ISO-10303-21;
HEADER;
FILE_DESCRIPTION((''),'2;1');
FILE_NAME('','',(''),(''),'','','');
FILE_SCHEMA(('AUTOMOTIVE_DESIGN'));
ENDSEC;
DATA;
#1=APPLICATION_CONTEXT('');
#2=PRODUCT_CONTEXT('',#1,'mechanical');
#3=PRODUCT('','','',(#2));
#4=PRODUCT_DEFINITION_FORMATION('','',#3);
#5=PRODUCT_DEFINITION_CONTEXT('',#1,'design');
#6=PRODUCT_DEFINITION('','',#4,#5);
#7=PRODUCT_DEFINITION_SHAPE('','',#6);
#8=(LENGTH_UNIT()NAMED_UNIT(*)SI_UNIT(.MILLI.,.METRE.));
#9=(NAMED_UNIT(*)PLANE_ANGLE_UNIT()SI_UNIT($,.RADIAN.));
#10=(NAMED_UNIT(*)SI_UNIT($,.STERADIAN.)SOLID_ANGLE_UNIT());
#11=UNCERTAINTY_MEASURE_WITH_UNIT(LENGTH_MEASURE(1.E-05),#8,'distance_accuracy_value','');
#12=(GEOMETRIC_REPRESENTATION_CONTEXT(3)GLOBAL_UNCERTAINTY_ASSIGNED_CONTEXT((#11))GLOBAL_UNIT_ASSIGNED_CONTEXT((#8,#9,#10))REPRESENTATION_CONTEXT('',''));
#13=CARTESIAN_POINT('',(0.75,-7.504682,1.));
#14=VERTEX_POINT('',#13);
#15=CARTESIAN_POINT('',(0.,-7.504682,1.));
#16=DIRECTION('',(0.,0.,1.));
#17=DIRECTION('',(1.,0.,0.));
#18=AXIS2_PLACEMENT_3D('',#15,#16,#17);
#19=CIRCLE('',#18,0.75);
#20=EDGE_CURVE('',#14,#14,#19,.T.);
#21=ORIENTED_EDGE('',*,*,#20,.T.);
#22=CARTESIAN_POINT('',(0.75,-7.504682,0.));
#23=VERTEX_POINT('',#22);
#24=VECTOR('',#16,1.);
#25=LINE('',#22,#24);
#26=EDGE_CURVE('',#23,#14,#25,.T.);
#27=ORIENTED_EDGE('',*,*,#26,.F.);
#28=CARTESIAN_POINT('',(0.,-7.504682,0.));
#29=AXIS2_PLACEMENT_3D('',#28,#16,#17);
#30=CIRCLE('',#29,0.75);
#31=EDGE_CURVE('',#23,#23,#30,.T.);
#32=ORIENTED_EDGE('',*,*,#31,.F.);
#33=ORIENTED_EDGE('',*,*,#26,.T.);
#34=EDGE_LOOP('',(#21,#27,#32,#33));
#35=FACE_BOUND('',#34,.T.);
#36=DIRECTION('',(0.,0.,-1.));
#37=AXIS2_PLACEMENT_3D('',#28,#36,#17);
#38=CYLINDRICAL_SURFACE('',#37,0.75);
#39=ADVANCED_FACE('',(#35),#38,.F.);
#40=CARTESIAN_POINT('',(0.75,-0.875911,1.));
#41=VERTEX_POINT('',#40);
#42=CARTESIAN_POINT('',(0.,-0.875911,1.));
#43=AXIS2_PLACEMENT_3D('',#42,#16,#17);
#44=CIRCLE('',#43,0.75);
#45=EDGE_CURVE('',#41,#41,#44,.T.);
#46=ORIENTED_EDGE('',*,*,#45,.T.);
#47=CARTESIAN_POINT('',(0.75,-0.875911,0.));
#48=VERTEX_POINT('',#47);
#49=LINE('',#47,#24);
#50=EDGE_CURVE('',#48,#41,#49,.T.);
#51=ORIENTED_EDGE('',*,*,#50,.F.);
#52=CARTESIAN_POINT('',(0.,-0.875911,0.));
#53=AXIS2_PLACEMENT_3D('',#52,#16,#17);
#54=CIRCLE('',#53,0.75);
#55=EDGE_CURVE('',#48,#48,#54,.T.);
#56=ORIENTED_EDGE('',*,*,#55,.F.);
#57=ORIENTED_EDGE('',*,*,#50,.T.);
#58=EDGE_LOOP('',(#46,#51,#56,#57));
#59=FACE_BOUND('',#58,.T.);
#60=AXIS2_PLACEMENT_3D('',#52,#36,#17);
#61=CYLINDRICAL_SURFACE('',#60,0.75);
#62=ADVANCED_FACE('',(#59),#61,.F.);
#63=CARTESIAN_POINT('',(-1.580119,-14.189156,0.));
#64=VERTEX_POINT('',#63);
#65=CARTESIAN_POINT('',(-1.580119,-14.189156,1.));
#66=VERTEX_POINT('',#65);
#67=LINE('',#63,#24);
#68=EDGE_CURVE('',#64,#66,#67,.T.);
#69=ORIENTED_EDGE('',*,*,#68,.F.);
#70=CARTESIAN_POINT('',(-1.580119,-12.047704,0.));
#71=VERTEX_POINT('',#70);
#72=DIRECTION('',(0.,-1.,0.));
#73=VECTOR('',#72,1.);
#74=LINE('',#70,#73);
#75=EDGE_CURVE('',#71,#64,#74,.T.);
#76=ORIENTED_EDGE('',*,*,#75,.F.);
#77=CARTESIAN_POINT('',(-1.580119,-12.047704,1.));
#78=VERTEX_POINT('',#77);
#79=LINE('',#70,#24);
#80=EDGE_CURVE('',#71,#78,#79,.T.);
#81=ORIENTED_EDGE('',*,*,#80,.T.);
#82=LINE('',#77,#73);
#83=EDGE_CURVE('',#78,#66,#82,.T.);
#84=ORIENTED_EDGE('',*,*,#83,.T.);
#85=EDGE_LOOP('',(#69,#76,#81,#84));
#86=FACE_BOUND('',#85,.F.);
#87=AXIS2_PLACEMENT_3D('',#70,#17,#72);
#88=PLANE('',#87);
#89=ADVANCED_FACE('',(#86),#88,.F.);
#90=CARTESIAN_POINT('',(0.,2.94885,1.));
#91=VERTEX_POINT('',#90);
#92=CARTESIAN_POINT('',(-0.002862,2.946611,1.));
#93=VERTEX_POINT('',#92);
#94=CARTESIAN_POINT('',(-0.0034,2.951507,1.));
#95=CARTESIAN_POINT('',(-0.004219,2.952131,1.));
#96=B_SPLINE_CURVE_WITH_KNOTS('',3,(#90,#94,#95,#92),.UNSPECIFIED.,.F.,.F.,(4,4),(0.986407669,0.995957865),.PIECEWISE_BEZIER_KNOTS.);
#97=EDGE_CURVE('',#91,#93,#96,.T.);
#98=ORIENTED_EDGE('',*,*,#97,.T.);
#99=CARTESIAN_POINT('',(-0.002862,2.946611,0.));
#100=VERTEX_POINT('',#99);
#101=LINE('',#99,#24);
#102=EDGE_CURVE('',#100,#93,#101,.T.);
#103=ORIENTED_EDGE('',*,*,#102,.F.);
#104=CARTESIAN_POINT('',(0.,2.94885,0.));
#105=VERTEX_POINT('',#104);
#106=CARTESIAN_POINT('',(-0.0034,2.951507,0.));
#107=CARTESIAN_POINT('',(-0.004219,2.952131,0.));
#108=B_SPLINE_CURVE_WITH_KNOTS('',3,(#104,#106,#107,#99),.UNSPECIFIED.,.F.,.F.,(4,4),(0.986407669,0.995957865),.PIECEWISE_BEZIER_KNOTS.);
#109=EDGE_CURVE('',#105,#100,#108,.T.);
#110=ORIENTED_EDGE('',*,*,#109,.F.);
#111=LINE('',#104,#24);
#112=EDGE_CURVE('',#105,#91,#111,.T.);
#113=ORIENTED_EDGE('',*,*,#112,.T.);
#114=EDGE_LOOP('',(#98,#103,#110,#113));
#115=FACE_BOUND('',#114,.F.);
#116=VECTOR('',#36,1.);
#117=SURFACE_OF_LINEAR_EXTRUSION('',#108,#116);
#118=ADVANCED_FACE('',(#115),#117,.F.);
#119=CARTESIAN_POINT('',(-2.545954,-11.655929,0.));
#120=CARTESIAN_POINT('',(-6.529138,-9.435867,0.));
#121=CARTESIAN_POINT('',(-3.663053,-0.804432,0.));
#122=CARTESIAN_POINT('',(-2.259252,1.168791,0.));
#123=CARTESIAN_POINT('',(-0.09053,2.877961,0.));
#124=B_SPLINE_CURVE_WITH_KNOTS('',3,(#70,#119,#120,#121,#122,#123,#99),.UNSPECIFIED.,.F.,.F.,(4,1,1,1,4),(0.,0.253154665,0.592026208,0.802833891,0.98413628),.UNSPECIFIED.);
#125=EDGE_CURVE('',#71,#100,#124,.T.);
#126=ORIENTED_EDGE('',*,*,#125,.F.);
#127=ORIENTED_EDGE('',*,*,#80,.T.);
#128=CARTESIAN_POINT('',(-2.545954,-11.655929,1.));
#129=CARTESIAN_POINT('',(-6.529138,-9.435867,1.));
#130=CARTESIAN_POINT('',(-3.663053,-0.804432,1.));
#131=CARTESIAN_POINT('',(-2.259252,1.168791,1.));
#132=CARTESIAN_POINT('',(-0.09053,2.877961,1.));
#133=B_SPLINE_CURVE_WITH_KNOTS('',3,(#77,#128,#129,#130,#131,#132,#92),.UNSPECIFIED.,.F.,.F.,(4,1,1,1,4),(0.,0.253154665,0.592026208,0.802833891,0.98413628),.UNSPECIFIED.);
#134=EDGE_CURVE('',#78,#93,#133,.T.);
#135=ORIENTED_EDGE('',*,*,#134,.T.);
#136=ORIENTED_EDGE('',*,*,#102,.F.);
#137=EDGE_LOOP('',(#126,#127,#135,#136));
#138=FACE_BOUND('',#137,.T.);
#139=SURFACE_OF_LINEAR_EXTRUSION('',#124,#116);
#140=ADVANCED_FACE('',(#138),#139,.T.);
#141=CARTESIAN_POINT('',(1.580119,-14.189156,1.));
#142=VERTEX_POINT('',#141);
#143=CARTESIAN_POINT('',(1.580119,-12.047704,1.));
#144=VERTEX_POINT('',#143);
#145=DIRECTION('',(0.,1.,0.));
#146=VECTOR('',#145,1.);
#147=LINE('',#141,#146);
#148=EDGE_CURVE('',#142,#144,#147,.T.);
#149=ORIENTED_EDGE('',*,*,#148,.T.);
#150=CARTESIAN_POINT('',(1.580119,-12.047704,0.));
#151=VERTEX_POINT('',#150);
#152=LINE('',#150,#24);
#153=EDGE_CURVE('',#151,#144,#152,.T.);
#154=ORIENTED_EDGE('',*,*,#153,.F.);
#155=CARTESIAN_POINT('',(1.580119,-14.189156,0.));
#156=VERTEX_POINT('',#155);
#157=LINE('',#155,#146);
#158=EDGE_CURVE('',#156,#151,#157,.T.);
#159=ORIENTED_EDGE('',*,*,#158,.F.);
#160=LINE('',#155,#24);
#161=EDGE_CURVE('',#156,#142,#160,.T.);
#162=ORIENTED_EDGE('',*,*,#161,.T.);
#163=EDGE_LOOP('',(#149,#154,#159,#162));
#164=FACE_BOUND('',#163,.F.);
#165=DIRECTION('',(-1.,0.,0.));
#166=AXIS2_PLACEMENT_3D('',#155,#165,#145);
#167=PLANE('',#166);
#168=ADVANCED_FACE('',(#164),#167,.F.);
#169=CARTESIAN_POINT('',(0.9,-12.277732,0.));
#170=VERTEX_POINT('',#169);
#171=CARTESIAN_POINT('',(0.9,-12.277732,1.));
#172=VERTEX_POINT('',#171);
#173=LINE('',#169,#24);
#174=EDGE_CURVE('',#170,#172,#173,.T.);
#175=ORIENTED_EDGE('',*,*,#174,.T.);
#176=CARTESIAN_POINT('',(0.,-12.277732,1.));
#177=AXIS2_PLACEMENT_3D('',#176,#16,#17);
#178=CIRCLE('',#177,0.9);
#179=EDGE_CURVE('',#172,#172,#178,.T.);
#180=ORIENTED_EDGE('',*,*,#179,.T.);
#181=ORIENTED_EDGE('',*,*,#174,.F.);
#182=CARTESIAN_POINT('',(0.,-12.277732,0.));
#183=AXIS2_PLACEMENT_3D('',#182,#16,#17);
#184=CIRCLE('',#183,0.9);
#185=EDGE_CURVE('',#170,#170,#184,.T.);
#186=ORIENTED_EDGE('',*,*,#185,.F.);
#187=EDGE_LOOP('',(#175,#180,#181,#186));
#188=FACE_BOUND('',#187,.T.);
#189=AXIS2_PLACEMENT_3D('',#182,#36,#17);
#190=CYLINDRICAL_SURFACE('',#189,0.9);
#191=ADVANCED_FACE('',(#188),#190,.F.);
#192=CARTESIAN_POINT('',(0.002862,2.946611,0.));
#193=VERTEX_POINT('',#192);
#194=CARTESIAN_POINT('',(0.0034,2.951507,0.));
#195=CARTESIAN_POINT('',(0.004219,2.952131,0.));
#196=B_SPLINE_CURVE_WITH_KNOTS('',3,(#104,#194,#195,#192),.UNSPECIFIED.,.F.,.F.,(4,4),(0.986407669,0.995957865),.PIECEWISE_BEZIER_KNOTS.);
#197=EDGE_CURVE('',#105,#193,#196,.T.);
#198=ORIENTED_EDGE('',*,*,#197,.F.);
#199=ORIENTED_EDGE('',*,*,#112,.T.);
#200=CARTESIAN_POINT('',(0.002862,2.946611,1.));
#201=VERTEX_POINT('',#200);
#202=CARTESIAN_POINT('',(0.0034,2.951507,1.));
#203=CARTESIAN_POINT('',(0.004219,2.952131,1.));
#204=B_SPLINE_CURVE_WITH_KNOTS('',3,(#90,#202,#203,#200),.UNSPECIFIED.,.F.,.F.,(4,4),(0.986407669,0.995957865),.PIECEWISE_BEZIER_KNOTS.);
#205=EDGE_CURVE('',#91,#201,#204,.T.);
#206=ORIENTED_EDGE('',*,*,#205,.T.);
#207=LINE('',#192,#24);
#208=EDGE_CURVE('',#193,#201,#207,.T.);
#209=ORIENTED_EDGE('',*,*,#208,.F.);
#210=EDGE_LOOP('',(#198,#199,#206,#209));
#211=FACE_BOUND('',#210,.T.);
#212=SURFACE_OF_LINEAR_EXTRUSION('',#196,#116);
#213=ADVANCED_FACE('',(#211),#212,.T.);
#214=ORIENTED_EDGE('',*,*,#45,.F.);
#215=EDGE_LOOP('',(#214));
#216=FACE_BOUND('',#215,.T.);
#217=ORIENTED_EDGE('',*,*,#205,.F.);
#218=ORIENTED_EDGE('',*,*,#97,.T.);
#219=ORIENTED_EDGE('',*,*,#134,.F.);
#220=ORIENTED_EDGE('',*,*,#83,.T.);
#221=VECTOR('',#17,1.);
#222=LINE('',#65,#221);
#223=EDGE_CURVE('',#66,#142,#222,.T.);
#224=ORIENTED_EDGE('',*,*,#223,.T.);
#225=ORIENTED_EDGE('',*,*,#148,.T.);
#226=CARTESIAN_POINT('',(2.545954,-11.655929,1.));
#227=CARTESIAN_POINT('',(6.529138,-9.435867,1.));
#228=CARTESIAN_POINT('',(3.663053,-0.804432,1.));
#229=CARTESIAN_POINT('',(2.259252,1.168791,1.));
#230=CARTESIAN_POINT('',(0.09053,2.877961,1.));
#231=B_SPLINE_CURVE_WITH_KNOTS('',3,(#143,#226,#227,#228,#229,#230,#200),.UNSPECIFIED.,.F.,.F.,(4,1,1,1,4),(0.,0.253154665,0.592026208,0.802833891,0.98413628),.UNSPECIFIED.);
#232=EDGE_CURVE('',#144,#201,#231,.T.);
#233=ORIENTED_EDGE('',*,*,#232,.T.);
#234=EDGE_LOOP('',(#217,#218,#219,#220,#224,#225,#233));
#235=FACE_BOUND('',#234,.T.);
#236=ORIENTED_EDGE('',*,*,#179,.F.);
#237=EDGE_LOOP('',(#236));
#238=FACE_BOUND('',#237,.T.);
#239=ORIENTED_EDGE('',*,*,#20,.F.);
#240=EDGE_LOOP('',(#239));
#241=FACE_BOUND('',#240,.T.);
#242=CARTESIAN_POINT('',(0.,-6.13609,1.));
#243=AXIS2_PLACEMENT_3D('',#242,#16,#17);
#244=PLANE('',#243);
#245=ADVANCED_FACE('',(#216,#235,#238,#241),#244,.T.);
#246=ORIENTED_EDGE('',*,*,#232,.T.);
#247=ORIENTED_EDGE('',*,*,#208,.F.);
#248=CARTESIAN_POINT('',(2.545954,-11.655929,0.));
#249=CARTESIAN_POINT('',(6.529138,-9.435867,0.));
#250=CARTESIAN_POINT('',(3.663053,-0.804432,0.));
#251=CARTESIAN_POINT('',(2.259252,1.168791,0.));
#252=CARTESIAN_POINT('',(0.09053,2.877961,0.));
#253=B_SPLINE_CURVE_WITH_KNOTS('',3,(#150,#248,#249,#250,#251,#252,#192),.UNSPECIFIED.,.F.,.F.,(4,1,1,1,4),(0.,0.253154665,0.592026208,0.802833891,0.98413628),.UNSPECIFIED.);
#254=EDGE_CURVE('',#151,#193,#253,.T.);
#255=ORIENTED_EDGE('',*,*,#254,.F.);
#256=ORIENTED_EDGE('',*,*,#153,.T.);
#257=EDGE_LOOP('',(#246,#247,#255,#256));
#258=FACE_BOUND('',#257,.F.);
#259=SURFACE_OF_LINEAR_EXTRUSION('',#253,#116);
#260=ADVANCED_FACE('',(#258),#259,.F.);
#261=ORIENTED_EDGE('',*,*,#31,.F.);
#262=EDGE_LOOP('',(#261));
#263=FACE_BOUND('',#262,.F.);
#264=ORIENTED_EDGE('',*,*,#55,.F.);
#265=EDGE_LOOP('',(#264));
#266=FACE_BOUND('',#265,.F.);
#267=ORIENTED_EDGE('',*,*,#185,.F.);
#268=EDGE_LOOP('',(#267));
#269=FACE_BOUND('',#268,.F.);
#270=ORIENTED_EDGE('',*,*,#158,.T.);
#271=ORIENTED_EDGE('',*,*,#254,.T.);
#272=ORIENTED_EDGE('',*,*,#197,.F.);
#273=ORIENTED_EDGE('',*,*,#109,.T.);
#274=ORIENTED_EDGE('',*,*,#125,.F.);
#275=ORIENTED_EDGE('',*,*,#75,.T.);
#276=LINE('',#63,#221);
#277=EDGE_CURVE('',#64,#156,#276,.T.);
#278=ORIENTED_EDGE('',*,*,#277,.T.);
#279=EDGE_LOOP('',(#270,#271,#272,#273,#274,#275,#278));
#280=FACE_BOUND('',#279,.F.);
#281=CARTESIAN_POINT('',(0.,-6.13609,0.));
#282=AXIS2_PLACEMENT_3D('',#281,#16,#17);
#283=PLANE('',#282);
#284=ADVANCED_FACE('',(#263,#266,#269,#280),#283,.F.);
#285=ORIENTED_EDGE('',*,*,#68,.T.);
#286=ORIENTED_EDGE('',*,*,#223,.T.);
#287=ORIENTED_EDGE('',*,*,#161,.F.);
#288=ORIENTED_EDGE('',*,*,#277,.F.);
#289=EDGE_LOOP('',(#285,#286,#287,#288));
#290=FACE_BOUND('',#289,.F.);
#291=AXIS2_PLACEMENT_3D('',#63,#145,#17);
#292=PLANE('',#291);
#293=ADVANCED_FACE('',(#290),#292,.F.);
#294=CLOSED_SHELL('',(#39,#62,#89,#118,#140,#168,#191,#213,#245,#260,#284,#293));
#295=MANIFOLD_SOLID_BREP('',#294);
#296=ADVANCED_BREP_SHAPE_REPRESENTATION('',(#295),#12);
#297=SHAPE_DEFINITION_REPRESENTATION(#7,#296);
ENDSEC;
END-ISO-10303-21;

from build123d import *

# Parameters (mm, degrees)
F0_R     = 0.9
F0_R_2   = 0.75
F1_DEPTH = 1


with BuildPart() as f1:
    # F0 (on Top) → F1 (new body)
    with BuildSketch(Plane.XY):
        with BuildLine():
            Line((-1.5801185972, -14.1891559951), (0, -14.1891559951))
            Line((0, -14.1891559951), (1.5801185972, -14.1891559951))
            Line((1.5801185972, -14.1891559951), (1.5801185972, -12.0477042827))
            add(Edge.make_bspline(
                [(1.5801185972, -12.0477042827), (2.5459541843, -11.6559293479), (6.5291377224, -9.4358668754), (3.6630530699, -0.8044320957), (2.2592520144, 1.1687912571), (0.090530272, 2.877961005), (0.002861701, 2.946611466)],
                knots=[0, 0, 0, 0, 0.2531546654, 0.5920262082, 0.802833891, 0.9841362798, 0.9841362798, 0.9841362798, 0.9841362798], degree=3))
            add(Edge.make_bspline(
                [(0.002861701, 2.946611466), (0.0022873137, 2.9442752228), (0.0013231593, 2.9408383042), (0, 2.9359889357)],
                knots=[0.9959578645, 0.9959578645, 0.9959578645, 0.9959578645, 1, 1, 1, 1], degree=3))
            add(Edge.make_bspline(
                [(-0.002861701, 2.946611466), (-0.0022873137, 2.9442752228), (-0.0013231593, 2.9408383042), (0, 2.9359889357)],
                knots=[0.9959578645, 0.9959578645, 0.9959578645, 0.9959578645, 1, 1, 1, 1], degree=3))
            add(Edge.make_bspline(
                [(-1.5801185972, -12.0477042827), (-2.5459541843, -11.6559293479), (-6.5291377224, -9.4358668754), (-3.6630530699, -0.8044320957), (-2.2592520144, 1.1687912571), (-0.090530272, 2.877961005), (-0.002861701, 2.946611466)],
                knots=[0, 0, 0, 0, 0.2531546654, 0.5920262082, 0.802833891, 0.9841362798, 0.9841362798, 0.9841362798, 0.9841362798], degree=3))
            Line((-1.5801185972, -12.0477042827), (-1.5801185972, -14.1891559951))
        make_face()
        with Locations((0, -12.2777316719)):
            Circle(F0_R, mode=Mode.SUBTRACT)
        with Locations((0, -7.5046815909)):
            Circle(F0_R_2, mode=Mode.SUBTRACT)
        with Locations((0, -0.8759110351)):
            Circle(F0_R_2, mode=Mode.SUBTRACT)
        with BuildLine():
            add(Edge.make_bspline(
                [(0.002861701, 2.946611466), (0.0022873137, 2.9442752228), (0.0013231593, 2.9408383042), (0, 2.9359889357)],
                knots=[0.9959578645, 0.9959578645, 0.9959578645, 0.9959578645, 1, 1, 1, 1], degree=3))
            add(Edge.make_bspline(
                [(0.002861701, 2.946611466), (0.0017633731, 2.9474715315), (0.0008086746, 2.9482183335), (0, 2.9488501794)],
                knots=[0.9841362798, 0.9841362798, 0.9841362798, 0.9841362798, 0.9864076693, 0.9864076693, 0.9864076693, 0.9864076693], degree=3))
            add(Edge.make_bspline(
                [(-0.002861701, 2.946611466), (-0.0017633731, 2.9474715315), (-0.0008086746, 2.9482183335), (0, 2.9488501794)],
                knots=[0.9841362798, 0.9841362798, 0.9841362798, 0.9841362798, 0.9864076693, 0.9864076693, 0.9864076693, 0.9864076693], degree=3))
            add(Edge.make_bspline(
                [(-0.002861701, 2.946611466), (-0.0022873137, 2.9442752228), (-0.0013231593, 2.9408383042), (0, 2.9359889357)],
                knots=[0.9959578645, 0.9959578645, 0.9959578645, 0.9959578645, 1, 1, 1, 1], degree=3))
        make_face()
        with BuildLine():
            add(Edge.make_bspline(
                [(0.002861701, 2.946611466), (0.0017633731, 2.9474715315), (0.0008086746, 2.9482183335), (0, 2.9488501794)],
                knots=[0.9841362798, 0.9841362798, 0.9841362798, 0.9841362798, 0.9864076693, 0.9864076693, 0.9864076693, 0.9864076693], degree=3))
            add(Edge.make_bspline(
                [(0, 2.9488501794), (0.0034001215, 2.9515068139), (0.0042187835, 2.9521312164), (0.002861701, 2.946611466)],
                knots=[0.9864076693, 0.9864076693, 0.9864076693, 0.9864076693, 0.9959578645, 0.9959578645, 0.9959578645, 0.9959578645], degree=3))
        make_face()
        with BuildLine():
            add(Edge.make_bspline(
                [(0, 2.9488501794), (-0.0034001215, 2.9515068139), (-0.0042187835, 2.9521312164), (-0.002861701, 2.946611466)],
                knots=[0.9864076693, 0.9864076693, 0.9864076693, 0.9864076693, 0.9959578645, 0.9959578645, 0.9959578645, 0.9959578645], degree=3))
            add(Edge.make_bspline(
                [(-0.002861701, 2.946611466), (-0.0017633731, 2.9474715315), (-0.0008086746, 2.9482183335), (0, 2.9488501794)],
                knots=[0.9841362798, 0.9841362798, 0.9841362798, 0.9841362798, 0.9864076693, 0.9864076693, 0.9864076693, 0.9864076693], degree=3))
        make_face()
    extrude(amount=F1_DEPTH)


solid = f1.part
